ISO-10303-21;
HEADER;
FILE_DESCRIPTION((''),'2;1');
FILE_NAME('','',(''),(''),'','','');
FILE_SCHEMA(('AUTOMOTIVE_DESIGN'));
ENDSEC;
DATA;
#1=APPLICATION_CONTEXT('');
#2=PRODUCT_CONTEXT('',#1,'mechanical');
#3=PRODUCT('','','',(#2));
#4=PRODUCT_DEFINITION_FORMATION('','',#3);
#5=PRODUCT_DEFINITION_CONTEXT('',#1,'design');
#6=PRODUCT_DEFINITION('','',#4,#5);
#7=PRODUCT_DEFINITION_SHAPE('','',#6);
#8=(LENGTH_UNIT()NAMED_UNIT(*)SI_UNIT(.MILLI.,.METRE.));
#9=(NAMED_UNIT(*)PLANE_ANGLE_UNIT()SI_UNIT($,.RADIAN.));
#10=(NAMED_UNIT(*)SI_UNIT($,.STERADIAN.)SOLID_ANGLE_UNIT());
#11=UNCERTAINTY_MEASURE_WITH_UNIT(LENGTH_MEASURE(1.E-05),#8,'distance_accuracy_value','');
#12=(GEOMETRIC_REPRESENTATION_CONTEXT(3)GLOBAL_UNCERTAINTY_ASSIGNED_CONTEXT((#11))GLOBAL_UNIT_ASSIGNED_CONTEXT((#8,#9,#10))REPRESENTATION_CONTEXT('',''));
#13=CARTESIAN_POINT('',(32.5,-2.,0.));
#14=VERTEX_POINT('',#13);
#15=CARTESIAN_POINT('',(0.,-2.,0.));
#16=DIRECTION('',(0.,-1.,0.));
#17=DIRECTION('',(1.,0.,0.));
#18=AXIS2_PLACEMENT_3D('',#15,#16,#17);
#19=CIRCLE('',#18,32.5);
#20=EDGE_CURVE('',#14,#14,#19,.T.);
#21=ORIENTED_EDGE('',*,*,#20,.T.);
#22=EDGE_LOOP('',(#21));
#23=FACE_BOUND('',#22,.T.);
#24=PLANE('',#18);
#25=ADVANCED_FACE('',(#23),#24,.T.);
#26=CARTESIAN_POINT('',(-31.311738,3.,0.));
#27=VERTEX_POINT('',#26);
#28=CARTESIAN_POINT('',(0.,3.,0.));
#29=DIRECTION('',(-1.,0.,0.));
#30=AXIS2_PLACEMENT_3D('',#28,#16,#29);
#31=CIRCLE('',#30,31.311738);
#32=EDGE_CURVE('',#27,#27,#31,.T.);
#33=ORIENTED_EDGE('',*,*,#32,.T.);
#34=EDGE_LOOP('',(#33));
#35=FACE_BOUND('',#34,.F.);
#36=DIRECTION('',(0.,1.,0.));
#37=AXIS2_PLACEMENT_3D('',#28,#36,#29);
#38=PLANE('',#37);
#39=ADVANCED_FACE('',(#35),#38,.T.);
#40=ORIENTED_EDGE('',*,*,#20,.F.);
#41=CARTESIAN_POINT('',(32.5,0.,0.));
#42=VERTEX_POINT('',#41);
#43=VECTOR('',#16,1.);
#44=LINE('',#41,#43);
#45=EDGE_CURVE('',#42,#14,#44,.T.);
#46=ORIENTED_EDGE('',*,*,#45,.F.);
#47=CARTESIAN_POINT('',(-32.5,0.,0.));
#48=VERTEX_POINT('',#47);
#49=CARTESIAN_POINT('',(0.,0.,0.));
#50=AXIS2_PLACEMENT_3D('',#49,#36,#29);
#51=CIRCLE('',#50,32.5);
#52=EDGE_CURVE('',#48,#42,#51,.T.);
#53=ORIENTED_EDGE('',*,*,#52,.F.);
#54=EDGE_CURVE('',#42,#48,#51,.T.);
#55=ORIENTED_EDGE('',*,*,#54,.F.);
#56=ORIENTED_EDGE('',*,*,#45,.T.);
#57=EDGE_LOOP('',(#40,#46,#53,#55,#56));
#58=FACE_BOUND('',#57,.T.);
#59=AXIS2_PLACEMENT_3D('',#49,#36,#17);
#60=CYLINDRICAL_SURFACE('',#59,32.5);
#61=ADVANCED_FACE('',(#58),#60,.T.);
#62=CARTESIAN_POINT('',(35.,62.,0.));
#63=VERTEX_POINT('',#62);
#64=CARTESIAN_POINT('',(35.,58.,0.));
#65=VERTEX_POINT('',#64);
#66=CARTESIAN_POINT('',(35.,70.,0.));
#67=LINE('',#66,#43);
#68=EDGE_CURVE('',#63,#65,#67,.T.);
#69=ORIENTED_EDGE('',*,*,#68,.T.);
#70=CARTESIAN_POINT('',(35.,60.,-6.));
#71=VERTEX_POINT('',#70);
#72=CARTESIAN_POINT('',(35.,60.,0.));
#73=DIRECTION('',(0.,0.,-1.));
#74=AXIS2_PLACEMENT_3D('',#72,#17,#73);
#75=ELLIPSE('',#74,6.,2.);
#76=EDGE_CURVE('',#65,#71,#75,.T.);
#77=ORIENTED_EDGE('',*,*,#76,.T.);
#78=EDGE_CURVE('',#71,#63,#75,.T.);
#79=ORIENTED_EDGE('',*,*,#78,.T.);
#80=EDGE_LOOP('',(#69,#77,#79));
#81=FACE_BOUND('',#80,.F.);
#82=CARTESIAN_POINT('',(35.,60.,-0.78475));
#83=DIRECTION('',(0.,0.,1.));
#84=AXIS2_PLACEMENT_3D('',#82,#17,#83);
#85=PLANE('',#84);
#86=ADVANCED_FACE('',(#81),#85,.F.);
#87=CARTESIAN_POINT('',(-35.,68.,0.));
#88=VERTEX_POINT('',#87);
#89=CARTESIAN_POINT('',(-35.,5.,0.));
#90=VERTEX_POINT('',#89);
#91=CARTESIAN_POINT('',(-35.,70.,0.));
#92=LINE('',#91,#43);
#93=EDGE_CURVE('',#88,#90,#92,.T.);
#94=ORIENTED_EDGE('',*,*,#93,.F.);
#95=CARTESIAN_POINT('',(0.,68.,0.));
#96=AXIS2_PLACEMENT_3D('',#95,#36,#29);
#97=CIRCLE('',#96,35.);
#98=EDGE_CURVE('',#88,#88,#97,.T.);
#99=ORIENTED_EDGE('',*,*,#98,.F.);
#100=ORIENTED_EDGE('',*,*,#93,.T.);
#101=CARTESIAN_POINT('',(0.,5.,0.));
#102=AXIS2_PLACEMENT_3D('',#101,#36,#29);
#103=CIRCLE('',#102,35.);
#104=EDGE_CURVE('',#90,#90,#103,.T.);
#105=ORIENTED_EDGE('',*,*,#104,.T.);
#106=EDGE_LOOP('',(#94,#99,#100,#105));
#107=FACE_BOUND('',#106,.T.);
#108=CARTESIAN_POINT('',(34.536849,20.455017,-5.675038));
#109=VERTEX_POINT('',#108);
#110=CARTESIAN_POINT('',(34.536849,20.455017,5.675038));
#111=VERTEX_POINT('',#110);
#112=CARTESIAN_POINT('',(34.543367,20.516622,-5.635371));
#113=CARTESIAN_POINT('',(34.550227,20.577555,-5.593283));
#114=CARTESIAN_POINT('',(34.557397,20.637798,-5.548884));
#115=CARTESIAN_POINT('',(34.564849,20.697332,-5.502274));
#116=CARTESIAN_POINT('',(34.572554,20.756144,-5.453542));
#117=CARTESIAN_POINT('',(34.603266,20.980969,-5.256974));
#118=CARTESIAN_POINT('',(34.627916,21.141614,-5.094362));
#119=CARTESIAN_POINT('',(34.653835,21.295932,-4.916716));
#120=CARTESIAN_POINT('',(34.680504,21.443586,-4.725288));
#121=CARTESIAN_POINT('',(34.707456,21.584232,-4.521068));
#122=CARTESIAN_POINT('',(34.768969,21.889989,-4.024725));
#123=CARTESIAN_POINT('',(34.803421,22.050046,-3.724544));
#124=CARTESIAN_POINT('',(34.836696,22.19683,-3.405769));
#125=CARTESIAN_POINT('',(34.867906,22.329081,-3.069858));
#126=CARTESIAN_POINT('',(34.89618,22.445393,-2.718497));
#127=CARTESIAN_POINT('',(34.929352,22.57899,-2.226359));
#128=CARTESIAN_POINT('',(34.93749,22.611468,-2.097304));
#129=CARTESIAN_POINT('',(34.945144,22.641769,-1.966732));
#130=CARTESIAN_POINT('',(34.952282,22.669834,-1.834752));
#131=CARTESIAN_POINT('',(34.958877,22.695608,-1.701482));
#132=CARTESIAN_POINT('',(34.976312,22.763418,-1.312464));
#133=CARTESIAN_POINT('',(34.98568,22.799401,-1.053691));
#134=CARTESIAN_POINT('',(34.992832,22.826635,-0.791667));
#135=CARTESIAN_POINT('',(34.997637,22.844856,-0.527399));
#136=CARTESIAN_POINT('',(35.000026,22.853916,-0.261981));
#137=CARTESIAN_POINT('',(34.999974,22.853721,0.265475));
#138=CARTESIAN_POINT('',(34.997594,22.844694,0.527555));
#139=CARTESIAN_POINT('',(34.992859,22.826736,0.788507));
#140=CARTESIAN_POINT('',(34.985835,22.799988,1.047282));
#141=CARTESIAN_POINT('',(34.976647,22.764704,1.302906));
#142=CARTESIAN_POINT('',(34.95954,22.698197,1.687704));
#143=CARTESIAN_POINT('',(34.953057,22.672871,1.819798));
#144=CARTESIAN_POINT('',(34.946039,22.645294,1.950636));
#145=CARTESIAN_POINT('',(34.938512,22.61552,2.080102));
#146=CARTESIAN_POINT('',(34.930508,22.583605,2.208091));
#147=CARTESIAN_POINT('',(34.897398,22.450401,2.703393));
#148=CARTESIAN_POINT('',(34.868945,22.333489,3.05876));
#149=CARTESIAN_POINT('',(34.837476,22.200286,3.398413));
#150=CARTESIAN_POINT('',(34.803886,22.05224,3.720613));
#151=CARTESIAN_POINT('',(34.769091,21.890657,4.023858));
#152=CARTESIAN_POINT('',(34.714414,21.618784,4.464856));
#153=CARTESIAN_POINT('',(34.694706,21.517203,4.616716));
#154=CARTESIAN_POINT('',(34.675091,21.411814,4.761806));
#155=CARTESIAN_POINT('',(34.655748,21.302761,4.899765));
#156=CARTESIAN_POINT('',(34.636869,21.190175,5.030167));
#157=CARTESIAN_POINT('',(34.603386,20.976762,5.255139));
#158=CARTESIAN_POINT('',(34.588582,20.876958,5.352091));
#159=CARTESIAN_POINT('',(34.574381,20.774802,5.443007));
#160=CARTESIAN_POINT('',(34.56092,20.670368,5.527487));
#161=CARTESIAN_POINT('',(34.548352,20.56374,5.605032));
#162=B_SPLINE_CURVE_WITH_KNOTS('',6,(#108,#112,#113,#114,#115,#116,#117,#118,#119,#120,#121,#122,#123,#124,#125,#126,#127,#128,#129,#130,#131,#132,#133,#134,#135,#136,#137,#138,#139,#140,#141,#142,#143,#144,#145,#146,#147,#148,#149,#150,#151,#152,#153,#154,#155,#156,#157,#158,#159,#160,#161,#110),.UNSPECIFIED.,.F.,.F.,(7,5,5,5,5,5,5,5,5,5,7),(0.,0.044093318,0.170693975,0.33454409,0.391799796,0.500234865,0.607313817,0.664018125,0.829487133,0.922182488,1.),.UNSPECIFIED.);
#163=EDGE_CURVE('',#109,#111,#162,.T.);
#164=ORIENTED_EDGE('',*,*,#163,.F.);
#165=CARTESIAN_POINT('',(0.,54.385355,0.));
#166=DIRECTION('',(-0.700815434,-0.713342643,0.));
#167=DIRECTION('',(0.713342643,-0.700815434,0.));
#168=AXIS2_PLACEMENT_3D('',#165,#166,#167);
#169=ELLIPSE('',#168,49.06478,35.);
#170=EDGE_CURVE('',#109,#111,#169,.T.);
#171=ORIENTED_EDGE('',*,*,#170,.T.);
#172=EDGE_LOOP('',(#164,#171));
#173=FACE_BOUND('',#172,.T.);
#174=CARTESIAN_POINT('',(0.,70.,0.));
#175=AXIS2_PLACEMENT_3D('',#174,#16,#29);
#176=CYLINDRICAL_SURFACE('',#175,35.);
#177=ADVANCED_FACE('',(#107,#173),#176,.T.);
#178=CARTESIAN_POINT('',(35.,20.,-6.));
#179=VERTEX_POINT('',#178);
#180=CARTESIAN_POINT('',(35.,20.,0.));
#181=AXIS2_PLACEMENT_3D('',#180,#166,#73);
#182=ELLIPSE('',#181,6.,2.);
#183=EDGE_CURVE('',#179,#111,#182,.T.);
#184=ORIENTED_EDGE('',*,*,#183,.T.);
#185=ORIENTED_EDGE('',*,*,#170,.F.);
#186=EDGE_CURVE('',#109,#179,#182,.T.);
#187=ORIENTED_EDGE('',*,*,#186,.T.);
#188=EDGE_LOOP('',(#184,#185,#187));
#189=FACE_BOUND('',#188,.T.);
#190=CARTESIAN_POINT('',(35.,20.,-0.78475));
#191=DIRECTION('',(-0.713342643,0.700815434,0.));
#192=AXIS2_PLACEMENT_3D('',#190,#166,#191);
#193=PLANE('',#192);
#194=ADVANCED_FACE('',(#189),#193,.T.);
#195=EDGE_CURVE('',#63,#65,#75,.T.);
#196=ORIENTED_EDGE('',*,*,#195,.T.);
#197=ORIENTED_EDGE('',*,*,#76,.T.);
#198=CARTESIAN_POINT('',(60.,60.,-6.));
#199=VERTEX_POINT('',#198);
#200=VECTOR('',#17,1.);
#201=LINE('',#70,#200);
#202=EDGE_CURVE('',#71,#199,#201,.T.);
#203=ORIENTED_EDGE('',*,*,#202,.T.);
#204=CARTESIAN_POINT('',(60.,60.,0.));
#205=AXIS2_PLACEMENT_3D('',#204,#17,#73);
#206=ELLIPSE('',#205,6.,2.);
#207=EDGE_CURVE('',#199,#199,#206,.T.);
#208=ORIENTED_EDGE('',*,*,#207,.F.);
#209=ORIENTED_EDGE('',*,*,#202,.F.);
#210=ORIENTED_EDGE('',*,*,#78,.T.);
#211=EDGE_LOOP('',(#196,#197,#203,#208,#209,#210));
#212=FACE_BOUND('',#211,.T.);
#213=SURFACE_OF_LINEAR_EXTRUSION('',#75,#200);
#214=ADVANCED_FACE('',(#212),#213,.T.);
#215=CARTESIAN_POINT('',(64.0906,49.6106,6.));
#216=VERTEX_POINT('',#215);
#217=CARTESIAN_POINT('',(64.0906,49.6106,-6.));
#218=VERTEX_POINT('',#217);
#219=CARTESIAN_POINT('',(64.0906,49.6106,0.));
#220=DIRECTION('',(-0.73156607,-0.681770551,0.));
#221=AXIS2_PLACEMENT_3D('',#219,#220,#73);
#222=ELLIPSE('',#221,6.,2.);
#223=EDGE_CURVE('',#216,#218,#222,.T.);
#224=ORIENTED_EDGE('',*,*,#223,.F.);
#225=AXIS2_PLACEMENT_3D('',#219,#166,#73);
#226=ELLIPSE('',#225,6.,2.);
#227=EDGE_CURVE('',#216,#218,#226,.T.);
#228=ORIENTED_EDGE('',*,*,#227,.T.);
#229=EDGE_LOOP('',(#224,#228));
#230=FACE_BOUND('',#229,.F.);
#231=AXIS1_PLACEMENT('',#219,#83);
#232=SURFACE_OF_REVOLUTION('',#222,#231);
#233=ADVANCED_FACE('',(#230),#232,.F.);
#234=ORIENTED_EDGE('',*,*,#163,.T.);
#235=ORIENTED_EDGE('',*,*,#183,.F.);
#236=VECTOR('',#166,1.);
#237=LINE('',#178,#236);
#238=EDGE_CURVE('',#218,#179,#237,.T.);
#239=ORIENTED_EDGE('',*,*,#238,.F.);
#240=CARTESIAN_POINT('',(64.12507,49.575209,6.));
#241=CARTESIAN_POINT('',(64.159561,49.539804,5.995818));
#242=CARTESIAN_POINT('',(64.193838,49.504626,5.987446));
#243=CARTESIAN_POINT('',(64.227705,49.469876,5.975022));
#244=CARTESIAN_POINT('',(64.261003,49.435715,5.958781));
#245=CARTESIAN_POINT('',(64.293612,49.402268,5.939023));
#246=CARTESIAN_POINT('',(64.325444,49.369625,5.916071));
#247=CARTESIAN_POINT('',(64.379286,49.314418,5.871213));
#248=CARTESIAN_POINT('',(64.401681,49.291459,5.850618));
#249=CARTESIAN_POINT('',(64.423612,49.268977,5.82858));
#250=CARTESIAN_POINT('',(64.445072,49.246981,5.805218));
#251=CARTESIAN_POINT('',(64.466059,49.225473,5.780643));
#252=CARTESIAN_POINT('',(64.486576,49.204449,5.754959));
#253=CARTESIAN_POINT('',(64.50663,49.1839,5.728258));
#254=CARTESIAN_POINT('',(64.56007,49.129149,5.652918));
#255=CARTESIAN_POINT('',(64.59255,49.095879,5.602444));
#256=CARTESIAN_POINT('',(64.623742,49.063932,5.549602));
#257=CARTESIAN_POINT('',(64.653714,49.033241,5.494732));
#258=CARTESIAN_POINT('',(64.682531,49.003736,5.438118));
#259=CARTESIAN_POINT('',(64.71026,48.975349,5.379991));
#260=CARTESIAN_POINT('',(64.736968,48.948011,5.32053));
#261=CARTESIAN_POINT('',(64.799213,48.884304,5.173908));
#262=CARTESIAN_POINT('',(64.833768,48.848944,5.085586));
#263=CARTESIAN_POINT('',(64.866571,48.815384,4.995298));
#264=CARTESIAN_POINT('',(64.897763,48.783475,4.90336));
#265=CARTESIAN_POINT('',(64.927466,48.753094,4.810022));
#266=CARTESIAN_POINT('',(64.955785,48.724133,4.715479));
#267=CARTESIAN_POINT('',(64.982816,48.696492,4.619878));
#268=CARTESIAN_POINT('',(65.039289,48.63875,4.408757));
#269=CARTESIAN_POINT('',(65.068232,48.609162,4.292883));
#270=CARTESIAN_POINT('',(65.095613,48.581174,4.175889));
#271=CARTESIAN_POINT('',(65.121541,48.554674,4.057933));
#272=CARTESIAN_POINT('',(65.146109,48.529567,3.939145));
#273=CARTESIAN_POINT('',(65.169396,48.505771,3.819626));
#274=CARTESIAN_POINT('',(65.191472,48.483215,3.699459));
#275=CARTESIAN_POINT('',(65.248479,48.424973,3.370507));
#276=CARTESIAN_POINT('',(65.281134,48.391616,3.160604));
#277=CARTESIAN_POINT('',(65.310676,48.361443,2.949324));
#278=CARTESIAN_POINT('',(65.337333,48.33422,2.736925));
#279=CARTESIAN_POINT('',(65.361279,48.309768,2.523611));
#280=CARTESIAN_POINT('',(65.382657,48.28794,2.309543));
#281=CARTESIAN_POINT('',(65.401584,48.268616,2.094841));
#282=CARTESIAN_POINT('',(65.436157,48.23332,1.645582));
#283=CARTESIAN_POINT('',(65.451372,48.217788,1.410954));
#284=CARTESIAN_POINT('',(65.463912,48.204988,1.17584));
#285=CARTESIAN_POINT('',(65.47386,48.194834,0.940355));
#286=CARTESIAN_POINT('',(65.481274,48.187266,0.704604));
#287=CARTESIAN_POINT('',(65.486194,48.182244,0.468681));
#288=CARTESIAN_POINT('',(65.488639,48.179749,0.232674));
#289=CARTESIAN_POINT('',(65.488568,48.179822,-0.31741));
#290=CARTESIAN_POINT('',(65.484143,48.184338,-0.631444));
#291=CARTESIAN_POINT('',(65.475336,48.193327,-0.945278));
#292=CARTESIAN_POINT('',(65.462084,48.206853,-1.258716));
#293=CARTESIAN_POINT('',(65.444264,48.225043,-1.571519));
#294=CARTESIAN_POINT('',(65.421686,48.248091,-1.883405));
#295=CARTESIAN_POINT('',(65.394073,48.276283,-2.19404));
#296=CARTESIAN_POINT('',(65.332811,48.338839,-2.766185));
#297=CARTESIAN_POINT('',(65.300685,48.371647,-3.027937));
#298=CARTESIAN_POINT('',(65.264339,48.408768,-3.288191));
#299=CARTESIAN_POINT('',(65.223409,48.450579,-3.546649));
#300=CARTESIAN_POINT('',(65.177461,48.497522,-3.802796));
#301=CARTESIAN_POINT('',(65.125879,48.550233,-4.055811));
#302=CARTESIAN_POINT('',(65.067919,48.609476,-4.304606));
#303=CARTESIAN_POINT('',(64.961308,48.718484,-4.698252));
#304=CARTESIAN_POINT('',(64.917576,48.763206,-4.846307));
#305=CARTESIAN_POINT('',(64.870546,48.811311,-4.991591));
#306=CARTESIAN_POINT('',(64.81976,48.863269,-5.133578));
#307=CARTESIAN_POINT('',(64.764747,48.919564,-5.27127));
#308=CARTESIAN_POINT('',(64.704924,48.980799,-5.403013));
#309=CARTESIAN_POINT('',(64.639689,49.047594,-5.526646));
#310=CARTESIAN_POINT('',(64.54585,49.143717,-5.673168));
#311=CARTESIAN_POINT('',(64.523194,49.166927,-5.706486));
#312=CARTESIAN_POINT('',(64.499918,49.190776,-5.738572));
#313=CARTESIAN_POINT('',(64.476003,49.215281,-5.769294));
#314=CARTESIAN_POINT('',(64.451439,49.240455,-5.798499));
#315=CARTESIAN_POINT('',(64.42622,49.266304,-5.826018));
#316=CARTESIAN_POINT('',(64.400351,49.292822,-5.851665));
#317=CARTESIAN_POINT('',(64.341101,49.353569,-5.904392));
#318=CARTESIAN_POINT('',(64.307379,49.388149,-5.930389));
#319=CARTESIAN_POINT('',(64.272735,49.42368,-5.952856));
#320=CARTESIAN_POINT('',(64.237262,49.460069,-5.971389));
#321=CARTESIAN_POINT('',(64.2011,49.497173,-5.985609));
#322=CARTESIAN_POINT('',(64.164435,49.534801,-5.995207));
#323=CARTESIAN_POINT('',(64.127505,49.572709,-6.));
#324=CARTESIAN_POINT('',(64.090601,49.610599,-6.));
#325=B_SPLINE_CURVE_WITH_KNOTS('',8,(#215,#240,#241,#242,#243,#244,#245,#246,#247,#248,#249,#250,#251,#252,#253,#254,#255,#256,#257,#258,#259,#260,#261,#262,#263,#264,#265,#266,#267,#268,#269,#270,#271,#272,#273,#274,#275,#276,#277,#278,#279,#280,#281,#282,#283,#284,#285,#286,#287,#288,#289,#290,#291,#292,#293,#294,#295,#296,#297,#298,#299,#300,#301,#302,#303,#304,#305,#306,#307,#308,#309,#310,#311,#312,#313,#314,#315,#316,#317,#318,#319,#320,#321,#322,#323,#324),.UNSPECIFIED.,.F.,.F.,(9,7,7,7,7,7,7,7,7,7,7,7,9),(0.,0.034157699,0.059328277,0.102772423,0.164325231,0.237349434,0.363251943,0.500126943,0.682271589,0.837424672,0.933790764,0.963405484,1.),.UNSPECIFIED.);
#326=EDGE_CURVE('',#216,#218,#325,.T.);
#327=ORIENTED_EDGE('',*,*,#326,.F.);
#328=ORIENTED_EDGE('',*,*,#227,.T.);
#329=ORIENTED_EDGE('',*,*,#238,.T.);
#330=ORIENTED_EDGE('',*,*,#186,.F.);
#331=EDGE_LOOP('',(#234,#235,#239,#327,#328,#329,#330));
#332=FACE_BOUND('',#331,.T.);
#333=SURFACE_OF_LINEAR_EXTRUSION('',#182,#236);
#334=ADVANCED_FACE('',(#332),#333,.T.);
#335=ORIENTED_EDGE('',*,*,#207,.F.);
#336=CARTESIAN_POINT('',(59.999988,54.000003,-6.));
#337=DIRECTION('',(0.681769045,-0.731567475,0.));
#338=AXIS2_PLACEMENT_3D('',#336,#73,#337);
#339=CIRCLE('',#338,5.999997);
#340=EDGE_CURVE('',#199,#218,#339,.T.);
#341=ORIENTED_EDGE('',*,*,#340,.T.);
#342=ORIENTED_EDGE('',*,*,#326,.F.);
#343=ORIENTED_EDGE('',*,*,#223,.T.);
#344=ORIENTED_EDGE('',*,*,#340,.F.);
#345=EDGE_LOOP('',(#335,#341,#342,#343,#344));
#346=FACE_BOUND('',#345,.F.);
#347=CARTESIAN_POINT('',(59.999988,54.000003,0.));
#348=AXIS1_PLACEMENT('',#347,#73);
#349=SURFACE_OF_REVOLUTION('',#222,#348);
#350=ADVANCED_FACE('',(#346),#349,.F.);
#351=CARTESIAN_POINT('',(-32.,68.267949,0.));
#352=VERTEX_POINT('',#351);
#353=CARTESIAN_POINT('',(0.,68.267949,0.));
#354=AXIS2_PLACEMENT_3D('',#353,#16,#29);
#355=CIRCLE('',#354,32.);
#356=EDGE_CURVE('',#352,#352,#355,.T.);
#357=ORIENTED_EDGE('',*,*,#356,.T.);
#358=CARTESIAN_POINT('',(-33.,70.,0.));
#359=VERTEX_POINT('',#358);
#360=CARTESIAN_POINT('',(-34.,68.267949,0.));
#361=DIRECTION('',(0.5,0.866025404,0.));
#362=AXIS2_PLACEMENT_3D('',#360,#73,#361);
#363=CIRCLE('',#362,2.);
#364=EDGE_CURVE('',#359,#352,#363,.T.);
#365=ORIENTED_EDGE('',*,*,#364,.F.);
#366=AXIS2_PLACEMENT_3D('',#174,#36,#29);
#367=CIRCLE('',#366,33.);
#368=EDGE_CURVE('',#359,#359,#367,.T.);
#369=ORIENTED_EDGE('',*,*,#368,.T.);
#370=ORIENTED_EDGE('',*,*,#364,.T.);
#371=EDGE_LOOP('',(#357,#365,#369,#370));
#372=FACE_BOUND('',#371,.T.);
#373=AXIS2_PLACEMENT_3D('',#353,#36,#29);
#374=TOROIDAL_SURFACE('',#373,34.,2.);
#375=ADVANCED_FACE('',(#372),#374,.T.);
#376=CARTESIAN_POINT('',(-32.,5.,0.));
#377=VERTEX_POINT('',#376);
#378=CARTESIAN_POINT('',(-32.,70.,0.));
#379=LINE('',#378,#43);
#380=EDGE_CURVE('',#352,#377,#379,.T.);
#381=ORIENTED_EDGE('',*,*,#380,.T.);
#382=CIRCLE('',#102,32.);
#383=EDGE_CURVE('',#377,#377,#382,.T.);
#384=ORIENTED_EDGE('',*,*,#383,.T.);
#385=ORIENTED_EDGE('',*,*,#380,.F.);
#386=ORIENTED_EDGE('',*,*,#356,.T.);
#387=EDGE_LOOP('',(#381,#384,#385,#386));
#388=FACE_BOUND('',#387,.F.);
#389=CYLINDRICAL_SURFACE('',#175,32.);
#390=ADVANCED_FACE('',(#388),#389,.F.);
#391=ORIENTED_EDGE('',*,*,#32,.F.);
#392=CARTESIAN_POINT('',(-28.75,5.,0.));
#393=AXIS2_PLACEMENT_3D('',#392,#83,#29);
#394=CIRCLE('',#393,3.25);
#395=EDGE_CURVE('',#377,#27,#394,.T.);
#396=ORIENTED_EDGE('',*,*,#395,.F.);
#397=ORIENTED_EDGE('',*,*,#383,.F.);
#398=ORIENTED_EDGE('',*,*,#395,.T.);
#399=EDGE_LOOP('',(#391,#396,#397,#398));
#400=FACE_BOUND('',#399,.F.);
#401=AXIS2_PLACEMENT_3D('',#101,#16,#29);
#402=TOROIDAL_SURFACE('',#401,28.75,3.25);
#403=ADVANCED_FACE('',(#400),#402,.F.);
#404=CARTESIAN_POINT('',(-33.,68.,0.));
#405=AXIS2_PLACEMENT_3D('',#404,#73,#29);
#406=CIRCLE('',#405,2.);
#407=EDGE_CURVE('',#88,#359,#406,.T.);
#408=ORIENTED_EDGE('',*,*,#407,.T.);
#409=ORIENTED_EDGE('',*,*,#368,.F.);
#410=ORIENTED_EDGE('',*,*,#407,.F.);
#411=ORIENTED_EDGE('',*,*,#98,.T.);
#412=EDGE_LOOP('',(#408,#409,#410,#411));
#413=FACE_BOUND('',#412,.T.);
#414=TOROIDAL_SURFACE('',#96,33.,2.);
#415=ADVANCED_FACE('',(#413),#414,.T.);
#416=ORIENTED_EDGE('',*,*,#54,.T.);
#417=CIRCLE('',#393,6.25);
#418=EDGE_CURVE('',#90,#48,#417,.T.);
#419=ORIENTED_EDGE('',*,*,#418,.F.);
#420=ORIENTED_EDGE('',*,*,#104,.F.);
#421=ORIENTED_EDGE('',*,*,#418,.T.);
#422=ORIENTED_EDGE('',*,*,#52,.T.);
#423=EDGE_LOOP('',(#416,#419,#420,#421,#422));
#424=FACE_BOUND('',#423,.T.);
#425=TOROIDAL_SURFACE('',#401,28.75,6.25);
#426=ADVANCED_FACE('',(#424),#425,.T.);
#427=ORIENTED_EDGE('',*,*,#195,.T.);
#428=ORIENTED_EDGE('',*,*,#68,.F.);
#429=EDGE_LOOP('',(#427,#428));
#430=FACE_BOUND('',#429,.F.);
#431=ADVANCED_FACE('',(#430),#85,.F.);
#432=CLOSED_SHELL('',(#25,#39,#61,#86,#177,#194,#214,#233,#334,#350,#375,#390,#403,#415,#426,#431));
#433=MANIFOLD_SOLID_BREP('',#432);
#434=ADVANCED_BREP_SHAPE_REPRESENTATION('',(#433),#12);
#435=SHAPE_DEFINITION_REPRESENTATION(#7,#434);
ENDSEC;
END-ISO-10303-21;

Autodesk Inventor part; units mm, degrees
sketch "Sketch1" plane through (0, 0, 0) normal (0, 0, 1) x (1, 0, 0)
  line L0 (0, 0) -> (0, 70)
  line L1 (0, 70) -> (-35, 70)
  line L2 (-35, 70) -> (-35, 5)
  line L3 (0, 0) -> (-32.5, 0)
  arc A0 (-35, 5) -> (-32.5, 0) centre (-28.75, 5) ccw
  dimension "d0" = 70
  dimension "d1" = 35
  dimension "d2" = 65
  dimension "d3" = 32.5
revolve "Revolution1" add sketch "Sketch1" angle 360 about axis through (0, 0, 0) along (0, 1, 0)
shell "Shell1" thickness 3 removed faces 1 at (-0.2748, 70, -9.3581)
sketch "Sketch2" plane through (0, 0, 0) normal (0, 0, 1) x (1, 0, 0)
  line L0 (35, 60) -> (60, 60)
  line L1 (35, 20) -> (64.0906, 49.6106)
  line L2 (35, 5) -> (35, 70) projected
  arc A0 (64.0906, 49.6106) -> (60, 60) centre (60, 54) ccw
ref_plane "Work Plane1" through (35, 60, 0) normal (1, 0, 0) x (0, 1, 0)
sketch "Sketch3" plane through (35, 60, 0) normal (1, 0, 0) x (0, 1, 0)
  ellipse E0 centre (0, 0) end of major axis (0, -6) minor radius 2
  point P0 (-60, 0)
ref_plane "Work Plane2" through (35, 5, 0) normal (1, 0, 0) x (0, 1, 0)
sketch "Sketch4" plane through (35, 5, 0) normal (1, 0, 0) x (0, 1, 0)
  point P0 (-5, 0)
ref_plane "Work Plane3" through (35, 20, 0) normal (1, 0, 0) x (0, 1, 0)
sketch "Sketch5" plane through (35, 20, 0) normal (1, 0, 0) x (0, 1, 0)
  ellipse E0 centre (0, 0) end of major axis (0, -5) minor radius 3
  point P0 (-20, 0)
sweep "Sweep1" add profiles "Sketch3" path "Sketch2" path curves L0 A0 L1
fillet "Fillet1" radius 2 2 edges at (35, 70, 0) (32, 70, 0)
sketch "Sketch6" plane through (0, 0, 0) normal (0, -1, 0) x (1, 0, 0)
  circle A0 centre (0, 0) radius 31
  circle A1 centre (0, 0) radius 32.5
  dimension "d34" = 62
  dimension "d35" = 65
extrude "Extrusion1" add sketch "Sketch6" along normal blind 2 contours A0 | A1
properties part number "Lab No. 2"
